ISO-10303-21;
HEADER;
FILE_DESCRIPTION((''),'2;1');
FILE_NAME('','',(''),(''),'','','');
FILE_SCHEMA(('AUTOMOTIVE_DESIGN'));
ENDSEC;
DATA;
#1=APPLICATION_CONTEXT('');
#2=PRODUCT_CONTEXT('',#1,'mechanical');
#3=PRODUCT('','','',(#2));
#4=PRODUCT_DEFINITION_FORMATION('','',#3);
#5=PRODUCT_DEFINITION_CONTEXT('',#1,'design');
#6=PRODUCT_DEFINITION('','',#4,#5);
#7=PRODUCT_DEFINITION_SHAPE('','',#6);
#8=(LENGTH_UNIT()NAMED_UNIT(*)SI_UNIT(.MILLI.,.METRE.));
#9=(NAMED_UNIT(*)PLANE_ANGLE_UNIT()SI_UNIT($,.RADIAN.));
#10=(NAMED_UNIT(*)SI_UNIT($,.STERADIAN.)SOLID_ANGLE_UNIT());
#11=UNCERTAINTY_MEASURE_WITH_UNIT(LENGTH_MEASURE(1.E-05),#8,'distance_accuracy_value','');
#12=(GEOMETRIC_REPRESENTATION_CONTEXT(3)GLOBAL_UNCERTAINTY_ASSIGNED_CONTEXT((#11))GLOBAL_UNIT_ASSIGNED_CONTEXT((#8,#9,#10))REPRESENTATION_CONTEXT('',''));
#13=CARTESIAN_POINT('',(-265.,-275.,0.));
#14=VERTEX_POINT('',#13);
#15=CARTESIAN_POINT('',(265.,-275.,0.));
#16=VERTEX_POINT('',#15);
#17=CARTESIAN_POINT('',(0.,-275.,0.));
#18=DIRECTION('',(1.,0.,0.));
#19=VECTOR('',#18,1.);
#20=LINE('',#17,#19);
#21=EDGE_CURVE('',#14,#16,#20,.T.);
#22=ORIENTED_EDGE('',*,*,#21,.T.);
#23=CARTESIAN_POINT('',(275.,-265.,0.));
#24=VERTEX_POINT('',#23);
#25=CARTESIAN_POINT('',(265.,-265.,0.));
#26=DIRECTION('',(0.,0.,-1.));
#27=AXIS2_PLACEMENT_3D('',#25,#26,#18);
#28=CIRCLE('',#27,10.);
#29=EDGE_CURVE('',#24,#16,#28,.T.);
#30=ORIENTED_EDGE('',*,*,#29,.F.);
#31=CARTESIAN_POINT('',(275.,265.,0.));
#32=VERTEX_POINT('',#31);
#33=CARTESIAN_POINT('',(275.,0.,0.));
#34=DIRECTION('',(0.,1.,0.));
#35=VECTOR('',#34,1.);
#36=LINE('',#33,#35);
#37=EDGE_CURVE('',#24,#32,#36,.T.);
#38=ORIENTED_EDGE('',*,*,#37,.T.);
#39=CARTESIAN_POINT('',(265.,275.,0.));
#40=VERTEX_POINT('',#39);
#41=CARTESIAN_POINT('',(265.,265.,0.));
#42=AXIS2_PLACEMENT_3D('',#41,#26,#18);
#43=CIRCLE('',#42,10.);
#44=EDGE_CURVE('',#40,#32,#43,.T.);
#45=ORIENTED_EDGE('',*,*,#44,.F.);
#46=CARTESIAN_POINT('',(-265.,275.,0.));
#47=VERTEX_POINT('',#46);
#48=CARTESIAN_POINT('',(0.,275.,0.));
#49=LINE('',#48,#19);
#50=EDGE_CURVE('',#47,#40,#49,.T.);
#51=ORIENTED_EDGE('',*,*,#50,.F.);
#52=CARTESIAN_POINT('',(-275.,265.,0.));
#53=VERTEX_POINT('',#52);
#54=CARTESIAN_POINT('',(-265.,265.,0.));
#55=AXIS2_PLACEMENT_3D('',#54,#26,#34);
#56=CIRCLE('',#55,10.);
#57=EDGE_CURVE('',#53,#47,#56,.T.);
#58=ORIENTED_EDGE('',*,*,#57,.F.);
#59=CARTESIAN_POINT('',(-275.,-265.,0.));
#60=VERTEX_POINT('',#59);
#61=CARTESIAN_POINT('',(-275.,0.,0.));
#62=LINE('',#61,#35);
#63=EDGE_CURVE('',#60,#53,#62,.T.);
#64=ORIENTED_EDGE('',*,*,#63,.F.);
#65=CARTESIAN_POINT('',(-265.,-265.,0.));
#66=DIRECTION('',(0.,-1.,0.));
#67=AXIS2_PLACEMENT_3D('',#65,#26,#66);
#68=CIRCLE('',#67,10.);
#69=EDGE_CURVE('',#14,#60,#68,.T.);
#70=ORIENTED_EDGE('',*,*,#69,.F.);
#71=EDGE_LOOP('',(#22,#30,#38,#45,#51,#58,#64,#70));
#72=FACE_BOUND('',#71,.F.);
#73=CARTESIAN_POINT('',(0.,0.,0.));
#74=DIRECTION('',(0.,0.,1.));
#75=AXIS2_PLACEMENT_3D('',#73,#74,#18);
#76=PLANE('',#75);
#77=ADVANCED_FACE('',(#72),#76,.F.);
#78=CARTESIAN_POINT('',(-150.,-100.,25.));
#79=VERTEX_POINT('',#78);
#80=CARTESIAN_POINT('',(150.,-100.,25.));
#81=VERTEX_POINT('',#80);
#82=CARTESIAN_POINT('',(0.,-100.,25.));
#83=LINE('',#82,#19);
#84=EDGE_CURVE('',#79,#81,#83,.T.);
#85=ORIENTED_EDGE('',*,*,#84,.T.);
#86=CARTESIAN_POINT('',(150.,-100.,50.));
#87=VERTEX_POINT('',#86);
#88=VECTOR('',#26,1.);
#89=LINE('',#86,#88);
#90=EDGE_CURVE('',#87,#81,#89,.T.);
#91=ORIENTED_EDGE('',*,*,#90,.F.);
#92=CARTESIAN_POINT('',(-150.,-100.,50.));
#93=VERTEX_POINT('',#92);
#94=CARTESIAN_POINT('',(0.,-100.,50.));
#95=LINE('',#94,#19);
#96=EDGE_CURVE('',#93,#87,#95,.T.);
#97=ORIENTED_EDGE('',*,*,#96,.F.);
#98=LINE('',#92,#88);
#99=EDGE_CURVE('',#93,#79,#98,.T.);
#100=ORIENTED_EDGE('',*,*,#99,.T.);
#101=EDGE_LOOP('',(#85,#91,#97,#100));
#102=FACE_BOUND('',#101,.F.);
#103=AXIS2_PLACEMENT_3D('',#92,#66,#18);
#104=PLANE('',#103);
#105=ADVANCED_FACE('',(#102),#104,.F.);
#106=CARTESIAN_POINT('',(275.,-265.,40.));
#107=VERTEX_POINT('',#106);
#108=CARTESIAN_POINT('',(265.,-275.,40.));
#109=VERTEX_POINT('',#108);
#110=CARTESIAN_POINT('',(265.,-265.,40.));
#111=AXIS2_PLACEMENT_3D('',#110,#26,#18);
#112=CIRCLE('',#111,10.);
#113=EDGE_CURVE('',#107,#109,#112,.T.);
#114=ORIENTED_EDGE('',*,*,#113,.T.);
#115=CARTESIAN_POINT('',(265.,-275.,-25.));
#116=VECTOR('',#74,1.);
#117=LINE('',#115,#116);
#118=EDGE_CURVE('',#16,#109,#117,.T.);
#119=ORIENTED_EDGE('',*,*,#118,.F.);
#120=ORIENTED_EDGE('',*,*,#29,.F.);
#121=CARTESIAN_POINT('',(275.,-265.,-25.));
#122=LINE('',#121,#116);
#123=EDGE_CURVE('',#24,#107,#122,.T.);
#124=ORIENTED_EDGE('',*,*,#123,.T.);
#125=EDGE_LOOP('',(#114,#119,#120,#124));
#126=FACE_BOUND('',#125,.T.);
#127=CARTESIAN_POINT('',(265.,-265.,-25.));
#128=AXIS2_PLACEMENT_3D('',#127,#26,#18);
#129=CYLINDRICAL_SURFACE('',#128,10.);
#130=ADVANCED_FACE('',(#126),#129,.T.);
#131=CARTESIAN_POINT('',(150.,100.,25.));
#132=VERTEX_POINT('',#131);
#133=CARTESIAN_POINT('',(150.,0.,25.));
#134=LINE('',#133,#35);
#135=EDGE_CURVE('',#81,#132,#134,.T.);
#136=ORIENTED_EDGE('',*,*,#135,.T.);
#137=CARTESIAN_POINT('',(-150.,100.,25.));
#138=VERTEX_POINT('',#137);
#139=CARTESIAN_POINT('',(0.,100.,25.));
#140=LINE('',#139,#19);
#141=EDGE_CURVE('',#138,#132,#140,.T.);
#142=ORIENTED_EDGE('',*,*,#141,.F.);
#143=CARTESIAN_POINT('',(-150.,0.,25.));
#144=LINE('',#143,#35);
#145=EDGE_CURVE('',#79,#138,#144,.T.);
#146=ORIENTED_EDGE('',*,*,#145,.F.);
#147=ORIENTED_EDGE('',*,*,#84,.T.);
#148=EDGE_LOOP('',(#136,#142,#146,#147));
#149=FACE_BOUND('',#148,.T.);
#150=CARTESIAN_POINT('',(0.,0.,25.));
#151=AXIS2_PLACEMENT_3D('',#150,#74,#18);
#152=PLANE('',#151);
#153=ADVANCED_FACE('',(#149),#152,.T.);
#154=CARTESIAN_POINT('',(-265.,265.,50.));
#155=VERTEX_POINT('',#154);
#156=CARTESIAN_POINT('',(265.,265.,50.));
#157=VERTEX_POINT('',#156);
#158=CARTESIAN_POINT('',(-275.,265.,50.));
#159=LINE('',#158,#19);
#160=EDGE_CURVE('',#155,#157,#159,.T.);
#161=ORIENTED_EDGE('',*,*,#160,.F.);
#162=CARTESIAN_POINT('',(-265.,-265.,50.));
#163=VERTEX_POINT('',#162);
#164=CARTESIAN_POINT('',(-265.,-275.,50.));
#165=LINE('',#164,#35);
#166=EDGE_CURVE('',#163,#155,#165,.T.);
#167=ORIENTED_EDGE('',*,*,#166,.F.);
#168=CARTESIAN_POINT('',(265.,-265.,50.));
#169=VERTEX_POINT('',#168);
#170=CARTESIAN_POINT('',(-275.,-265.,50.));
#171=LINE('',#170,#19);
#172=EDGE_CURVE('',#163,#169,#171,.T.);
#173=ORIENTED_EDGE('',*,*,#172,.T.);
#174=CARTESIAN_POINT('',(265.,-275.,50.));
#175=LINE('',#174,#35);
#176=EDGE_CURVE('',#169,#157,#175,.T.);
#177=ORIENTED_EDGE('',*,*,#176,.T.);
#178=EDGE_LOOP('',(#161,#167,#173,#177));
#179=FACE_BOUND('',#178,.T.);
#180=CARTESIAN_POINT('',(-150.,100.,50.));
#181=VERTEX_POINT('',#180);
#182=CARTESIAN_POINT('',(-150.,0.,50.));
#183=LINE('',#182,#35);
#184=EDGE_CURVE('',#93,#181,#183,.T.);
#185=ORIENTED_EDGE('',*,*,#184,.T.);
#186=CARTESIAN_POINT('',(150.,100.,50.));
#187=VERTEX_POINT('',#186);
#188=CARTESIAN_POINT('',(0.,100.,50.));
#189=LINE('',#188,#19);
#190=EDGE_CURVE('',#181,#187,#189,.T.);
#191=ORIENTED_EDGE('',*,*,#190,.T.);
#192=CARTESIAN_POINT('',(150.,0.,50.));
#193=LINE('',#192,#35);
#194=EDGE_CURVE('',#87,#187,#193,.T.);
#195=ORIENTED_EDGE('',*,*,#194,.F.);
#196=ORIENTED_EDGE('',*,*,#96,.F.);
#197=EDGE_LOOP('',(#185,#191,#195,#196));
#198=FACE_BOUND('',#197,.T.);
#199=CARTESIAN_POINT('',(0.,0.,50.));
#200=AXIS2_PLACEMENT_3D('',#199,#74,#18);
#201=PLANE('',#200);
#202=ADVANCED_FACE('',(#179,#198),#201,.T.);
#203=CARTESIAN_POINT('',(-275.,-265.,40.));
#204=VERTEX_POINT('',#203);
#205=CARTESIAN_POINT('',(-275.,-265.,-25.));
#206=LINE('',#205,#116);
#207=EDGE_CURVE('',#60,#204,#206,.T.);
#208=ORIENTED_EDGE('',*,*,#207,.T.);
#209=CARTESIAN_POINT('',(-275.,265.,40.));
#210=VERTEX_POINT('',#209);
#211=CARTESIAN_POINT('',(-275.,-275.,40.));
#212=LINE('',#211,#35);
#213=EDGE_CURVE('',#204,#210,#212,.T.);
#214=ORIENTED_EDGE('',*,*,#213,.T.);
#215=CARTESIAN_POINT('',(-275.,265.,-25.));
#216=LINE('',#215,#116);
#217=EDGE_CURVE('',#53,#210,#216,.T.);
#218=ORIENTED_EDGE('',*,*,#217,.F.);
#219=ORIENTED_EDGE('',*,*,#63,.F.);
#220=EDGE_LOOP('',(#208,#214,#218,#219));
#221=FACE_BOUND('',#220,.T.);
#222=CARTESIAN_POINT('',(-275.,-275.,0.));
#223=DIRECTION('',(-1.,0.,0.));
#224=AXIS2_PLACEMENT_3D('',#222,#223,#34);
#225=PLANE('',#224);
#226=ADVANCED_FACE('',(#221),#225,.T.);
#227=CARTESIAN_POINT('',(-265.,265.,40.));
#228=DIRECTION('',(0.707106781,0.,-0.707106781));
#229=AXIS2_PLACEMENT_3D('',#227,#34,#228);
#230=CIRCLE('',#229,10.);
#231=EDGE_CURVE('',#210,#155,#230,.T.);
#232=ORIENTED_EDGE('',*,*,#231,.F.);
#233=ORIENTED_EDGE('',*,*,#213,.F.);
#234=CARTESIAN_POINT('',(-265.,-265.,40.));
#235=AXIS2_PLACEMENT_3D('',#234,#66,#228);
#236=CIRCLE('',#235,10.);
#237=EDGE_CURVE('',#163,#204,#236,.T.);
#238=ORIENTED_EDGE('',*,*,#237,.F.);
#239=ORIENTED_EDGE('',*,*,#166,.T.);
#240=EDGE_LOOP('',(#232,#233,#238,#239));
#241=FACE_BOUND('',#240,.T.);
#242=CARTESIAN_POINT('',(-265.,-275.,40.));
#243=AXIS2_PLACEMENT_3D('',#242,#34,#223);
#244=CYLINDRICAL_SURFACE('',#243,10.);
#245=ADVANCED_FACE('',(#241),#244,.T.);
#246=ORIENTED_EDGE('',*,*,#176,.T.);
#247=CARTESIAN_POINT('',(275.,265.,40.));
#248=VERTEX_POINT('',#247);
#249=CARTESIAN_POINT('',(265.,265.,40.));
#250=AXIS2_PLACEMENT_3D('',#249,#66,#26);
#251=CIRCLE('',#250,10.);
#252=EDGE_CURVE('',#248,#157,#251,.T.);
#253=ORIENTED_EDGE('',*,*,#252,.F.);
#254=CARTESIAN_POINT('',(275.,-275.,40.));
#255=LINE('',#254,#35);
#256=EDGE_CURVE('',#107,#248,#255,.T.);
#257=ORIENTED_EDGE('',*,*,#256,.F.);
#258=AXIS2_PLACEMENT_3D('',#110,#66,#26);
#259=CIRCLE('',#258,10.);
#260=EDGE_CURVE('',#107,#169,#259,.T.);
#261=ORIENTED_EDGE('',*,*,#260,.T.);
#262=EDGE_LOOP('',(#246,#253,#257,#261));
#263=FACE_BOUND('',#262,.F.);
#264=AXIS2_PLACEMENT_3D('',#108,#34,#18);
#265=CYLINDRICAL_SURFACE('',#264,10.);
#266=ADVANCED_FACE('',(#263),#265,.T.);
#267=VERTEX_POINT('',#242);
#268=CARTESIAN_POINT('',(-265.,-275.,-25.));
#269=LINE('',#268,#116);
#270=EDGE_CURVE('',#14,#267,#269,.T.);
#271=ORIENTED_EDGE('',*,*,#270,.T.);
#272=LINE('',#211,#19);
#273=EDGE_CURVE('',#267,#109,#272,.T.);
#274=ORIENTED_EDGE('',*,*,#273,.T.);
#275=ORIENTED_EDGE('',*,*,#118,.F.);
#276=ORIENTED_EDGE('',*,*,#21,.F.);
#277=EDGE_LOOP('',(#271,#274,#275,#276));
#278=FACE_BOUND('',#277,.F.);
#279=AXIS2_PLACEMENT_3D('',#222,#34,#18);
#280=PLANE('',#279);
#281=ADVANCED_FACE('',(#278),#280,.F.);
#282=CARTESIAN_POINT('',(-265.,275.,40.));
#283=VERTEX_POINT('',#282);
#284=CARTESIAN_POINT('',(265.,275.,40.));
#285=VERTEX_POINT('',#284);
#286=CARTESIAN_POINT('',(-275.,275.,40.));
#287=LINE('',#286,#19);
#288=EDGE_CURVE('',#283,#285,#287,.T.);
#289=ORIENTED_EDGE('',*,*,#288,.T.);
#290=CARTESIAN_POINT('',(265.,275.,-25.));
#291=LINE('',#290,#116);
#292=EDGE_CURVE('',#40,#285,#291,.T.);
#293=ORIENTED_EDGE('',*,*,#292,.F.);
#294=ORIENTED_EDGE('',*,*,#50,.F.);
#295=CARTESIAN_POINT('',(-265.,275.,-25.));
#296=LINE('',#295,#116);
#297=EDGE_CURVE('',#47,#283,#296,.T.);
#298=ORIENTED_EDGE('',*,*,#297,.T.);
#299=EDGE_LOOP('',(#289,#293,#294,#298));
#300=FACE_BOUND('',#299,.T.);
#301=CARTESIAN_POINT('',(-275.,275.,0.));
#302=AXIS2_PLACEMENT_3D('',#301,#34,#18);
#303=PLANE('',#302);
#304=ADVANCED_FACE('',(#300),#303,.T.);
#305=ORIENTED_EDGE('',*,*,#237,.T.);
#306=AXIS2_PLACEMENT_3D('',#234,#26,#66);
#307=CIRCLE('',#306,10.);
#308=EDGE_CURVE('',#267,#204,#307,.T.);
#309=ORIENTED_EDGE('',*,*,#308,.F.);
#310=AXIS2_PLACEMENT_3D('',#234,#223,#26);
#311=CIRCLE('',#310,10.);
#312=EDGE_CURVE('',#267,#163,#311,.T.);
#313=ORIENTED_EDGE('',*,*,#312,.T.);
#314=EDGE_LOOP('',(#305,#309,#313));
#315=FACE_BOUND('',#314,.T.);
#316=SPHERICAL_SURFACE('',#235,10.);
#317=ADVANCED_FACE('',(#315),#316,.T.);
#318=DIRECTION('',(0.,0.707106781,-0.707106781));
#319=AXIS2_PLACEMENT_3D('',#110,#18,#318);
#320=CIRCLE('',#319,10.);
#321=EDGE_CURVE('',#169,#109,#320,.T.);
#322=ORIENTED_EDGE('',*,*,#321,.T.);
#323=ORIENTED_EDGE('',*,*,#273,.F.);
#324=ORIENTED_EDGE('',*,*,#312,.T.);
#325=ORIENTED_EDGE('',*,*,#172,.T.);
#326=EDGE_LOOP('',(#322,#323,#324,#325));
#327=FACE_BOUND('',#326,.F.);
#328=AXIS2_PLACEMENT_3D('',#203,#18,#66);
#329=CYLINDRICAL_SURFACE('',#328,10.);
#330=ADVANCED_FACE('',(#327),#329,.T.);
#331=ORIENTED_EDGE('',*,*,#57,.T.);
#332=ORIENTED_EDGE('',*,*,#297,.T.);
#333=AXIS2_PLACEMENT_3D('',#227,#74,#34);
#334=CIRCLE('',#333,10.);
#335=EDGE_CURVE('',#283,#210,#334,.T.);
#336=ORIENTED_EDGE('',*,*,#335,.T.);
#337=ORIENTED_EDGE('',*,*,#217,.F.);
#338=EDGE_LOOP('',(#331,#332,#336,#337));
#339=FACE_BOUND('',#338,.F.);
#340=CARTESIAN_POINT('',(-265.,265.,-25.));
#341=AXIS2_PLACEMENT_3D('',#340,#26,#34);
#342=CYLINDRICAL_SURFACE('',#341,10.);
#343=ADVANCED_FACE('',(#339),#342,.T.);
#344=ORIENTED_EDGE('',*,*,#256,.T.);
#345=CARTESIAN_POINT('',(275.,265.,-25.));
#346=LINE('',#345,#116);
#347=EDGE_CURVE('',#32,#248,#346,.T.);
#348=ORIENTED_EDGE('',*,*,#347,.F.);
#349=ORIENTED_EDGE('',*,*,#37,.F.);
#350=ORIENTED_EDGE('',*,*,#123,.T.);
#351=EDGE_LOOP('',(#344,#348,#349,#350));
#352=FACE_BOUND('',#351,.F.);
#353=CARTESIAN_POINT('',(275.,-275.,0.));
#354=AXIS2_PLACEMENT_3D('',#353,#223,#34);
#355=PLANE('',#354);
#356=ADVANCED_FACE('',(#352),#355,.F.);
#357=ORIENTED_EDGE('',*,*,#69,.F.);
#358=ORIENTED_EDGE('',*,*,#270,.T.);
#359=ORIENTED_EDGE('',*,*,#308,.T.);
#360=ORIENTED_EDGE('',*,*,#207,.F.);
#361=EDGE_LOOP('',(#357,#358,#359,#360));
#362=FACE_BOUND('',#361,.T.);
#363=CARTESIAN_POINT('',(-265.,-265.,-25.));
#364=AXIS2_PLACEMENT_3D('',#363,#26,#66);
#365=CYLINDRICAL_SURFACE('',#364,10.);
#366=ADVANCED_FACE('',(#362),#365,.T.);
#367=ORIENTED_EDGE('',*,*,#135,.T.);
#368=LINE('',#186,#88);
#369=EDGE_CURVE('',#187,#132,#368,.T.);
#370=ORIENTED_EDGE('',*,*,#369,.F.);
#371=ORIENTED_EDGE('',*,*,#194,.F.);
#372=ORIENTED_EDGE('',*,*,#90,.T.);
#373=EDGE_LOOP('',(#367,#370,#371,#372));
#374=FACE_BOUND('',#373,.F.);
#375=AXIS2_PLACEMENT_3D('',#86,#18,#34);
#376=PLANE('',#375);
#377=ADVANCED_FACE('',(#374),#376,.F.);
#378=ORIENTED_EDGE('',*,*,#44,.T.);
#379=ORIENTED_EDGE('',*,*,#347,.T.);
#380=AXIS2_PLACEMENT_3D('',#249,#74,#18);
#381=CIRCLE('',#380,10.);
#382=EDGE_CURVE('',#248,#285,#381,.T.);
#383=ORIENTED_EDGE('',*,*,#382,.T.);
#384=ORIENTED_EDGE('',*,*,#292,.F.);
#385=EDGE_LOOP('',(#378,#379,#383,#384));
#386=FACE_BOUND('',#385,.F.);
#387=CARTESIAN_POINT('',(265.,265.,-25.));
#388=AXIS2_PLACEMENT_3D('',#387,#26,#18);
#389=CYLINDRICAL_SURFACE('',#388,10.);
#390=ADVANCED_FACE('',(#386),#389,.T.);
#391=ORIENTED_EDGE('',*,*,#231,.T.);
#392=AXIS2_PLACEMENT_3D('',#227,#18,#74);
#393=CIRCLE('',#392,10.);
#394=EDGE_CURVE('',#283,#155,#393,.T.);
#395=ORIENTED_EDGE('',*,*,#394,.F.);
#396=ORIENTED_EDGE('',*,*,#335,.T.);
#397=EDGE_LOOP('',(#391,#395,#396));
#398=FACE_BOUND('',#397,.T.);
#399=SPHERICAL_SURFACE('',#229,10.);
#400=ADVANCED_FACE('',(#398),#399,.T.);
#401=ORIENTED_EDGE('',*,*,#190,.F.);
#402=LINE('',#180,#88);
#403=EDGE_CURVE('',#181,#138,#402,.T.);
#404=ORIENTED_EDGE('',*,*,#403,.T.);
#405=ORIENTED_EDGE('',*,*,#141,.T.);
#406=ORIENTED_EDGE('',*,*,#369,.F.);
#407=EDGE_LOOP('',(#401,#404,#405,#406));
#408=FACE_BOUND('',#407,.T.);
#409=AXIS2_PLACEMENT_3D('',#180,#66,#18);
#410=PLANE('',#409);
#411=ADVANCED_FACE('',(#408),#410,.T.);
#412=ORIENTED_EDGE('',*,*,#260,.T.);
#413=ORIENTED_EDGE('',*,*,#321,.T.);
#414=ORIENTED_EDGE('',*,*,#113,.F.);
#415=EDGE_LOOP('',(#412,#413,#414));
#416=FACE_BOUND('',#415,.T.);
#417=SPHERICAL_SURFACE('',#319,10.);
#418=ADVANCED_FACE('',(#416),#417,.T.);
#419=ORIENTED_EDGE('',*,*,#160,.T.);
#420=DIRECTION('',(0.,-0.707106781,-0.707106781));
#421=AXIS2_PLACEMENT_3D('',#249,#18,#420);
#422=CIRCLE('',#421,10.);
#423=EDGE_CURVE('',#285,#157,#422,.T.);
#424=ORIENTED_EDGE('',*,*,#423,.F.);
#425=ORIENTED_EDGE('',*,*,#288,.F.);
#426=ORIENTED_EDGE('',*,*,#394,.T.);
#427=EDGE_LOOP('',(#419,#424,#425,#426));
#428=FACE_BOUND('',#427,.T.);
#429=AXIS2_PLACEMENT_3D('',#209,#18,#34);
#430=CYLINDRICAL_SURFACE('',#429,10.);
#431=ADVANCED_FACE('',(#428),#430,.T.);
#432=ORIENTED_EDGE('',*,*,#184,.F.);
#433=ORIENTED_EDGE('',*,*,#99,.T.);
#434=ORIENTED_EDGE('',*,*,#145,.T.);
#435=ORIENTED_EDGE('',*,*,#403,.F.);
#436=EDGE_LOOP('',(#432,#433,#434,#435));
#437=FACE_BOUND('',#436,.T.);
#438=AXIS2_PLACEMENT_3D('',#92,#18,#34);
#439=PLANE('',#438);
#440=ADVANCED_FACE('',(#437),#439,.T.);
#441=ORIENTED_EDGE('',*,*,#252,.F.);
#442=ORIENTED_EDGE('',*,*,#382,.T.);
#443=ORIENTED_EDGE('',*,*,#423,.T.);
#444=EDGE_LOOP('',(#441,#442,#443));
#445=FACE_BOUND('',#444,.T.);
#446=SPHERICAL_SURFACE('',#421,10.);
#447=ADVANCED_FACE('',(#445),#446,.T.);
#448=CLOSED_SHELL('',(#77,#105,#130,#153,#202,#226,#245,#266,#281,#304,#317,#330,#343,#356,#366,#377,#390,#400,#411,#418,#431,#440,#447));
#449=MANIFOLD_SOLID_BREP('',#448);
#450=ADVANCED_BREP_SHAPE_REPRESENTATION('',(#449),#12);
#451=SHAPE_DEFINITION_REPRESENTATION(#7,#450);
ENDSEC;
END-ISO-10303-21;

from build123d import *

# Parameters (mm, degrees)
F0_W         = 550
F0_H         = 550
F1_DEPTH     = 50
F2_R         = 10
F3_T1_DEPTH  = 65
F3_S5_W      = 10
F3_S5_H      = 10
F3_T6_DEPTH  = 10
F3_S11_W     = 10
F3_S11_H     = 10
F3_T12_DEPTH = 10
F3_S17_W     = 10
F3_S17_H     = 10
F3_T18_DEPTH = 10
F3_S23_W     = 10
F3_S23_H     = 10
F3_T24_DEPTH = 10
F4_W         = 300
F4_H         = 200
F5_DEPTH     = 25


# Not quite as in the source:
# - a fillet or chamfer that OpenCascade refuses, or shapes differently, is made with other operations: its cross-section is extruded or revolved along the edge and cut away or added


with BuildPart() as f1:
    # F0 (on Top) → F1 (new body)
    with BuildSketch(Plane.XY):
        Rectangle(F0_W, F0_H)
    extrude(amount=F1_DEPTH)

    # F2
    f2_edges = [f1.edges().sort_by_distance(p)[0] for p in [
        (0, -275, 50),
        (275, 0, 50),
        (0, 275, 50),
        (-275, 0, 50),
    ]]
    fillet(f2_edges, radius=F2_R)

    # F3: fillet of radius 10 on 4 edges, made by hand

    # F3_s2 → F3_t1 (cut)
    with BuildSketch(Plane.XY.offset(-25)):
        with BuildLine():
            ThreePointArc((275, -265), (272.0710678119, -272.0710678119), (265, -275))
            Line((265, -275), (275, -275))
            Line((275, -275), (275, -265))
        make_face()
        with BuildLine():
            ThreePointArc((-265, -275), (-272.0710678119, -272.0710678119), (-275, -265))
            Line((-275, -265), (-275, -275))
            Line((-275, -275), (-265, -275))
        make_face()
        with BuildLine():
            ThreePointArc((-265, 275), (-272.0710678119, 272.0710678119), (-275, 265))
            Line((-275, 265), (-275, 275))
            Line((-275, 275), (-265, 275))
        make_face()
        with BuildLine():
            ThreePointArc((275, 265), (272.0710678119, 272.0710678119), (265, 275))
            Line((265, 275), (275, 275))
            Line((275, 275), (275, 265))
        make_face()
    extrude(amount=F3_T1_DEPTH, mode=Mode.SUBTRACT)


with BuildPart() as f3_tool4:
    # F3_s5 → F3_t6 (new body)
    with BuildSketch(Plane.YZ.offset(265)):
        with Locations((270, 45)):
            Rectangle(F3_S5_W, F3_S5_H)
    extrude(amount=F3_T6_DEPTH)

    # F3_s7 → F3_t8 (revolve, cut)
    with BuildSketch(Plane(origin=(265, 265, 40), x_dir=(0, -0.7071067812, -0.7071067812), z_dir=(0, -0.7071067812, 0.7071067812))):
        with BuildLine():
            ThreePointArc((0, -10), (10, 0), (0, 10))
            Line((0, 10), (0, -10))
        make_face()
    revolve(axis=Axis((265, 265, 40), (1, 0, 0)), mode=Mode.SUBTRACT)


with BuildPart() as f1_1:
    add(f1.part)

    # F3_t3: cut F3_tool4
    add(f3_tool4.part, mode=Mode.SUBTRACT)


with BuildPart() as f3_tool10:
    # F3_s11 → F3_t12 (new body)
    with BuildSketch(Plane.XZ.offset(-265)):
        with Locations((-270, 45)):
            Rectangle(F3_S11_W, F3_S11_H)
    extrude(amount=-F3_T12_DEPTH)

    # F3_s13 → F3_t14 (revolve, cut)
    with BuildSketch(Plane(origin=(-265, 265, 40), x_dir=(0.7071067812, 0, -0.7071067812), z_dir=(0.7071067812, 0, 0.7071067812))):
        with BuildLine():
            ThreePointArc((0, -10), (10, 0), (0, 10))
            Line((0, 10), (0, -10))
        make_face()
    revolve(axis=Axis((-265, 265, 40), (0, 1, 0)), mode=Mode.SUBTRACT)


with BuildPart() as f1_2:
    add(f1_1.part)

    # F3_t9: cut F3_tool10
    add(f3_tool10.part, mode=Mode.SUBTRACT)


with BuildPart() as f3_tool16:
    # F3_s17 → F3_t18 (new body)
    with BuildSketch(Plane.XZ.offset(265)):
        with Locations((-270, 45)):
            Rectangle(F3_S17_W, F3_S17_H)
    extrude(amount=F3_T18_DEPTH)

    # F3_s19 → F3_t20 (revolve, cut)
    with BuildSketch(Plane(origin=(-265, -265, 40), x_dir=(0.7071067812, 0, -0.7071067812), z_dir=(-0.7071067812, 0, -0.7071067812))):
        with BuildLine():
            ThreePointArc((0, -10), (10, 0), (0, 10))
            Line((0, 10), (0, -10))
        make_face()
    revolve(axis=Axis((-265, -265, 40), (0, -1, 0)), mode=Mode.SUBTRACT)


with BuildPart() as f1_3:
    add(f1_2.part)

    # F3_t15: cut F3_tool16
    add(f3_tool16.part, mode=Mode.SUBTRACT)


with BuildPart() as f3_tool22:
    # F3_s23 → F3_t24 (new body)
    with BuildSketch(Plane.YZ.offset(265)):
        with Locations((-270, 45)):
            Rectangle(F3_S23_W, F3_S23_H)
    extrude(amount=F3_T24_DEPTH)

    # F3_s25 → F3_t26 (revolve, cut)
    with BuildSketch(Plane(origin=(265, -265, 40), x_dir=(0, 0.7071067812, -0.7071067812), z_dir=(0, -0.7071067812, -0.7071067812))):
        with BuildLine():
            ThreePointArc((0, -10), (10, 0), (0, 10))
            Line((0, 10), (0, -10))
        make_face()
    revolve(axis=Axis((265, -265, 40), (1, 0, 0)), mode=Mode.SUBTRACT)


with BuildPart() as f1_4:
    add(f1_3.part)

    # F3_t21: cut F3_tool22
    add(f3_tool22.part, mode=Mode.SUBTRACT)

    # F4 (on face) → F5 (cut)
    with BuildSketch(Plane.XY.offset(50)):
        Rectangle(F4_W, F4_H)
    extrude(amount=-F5_DEPTH, mode=Mode.SUBTRACT)


solid = f1_4.part
